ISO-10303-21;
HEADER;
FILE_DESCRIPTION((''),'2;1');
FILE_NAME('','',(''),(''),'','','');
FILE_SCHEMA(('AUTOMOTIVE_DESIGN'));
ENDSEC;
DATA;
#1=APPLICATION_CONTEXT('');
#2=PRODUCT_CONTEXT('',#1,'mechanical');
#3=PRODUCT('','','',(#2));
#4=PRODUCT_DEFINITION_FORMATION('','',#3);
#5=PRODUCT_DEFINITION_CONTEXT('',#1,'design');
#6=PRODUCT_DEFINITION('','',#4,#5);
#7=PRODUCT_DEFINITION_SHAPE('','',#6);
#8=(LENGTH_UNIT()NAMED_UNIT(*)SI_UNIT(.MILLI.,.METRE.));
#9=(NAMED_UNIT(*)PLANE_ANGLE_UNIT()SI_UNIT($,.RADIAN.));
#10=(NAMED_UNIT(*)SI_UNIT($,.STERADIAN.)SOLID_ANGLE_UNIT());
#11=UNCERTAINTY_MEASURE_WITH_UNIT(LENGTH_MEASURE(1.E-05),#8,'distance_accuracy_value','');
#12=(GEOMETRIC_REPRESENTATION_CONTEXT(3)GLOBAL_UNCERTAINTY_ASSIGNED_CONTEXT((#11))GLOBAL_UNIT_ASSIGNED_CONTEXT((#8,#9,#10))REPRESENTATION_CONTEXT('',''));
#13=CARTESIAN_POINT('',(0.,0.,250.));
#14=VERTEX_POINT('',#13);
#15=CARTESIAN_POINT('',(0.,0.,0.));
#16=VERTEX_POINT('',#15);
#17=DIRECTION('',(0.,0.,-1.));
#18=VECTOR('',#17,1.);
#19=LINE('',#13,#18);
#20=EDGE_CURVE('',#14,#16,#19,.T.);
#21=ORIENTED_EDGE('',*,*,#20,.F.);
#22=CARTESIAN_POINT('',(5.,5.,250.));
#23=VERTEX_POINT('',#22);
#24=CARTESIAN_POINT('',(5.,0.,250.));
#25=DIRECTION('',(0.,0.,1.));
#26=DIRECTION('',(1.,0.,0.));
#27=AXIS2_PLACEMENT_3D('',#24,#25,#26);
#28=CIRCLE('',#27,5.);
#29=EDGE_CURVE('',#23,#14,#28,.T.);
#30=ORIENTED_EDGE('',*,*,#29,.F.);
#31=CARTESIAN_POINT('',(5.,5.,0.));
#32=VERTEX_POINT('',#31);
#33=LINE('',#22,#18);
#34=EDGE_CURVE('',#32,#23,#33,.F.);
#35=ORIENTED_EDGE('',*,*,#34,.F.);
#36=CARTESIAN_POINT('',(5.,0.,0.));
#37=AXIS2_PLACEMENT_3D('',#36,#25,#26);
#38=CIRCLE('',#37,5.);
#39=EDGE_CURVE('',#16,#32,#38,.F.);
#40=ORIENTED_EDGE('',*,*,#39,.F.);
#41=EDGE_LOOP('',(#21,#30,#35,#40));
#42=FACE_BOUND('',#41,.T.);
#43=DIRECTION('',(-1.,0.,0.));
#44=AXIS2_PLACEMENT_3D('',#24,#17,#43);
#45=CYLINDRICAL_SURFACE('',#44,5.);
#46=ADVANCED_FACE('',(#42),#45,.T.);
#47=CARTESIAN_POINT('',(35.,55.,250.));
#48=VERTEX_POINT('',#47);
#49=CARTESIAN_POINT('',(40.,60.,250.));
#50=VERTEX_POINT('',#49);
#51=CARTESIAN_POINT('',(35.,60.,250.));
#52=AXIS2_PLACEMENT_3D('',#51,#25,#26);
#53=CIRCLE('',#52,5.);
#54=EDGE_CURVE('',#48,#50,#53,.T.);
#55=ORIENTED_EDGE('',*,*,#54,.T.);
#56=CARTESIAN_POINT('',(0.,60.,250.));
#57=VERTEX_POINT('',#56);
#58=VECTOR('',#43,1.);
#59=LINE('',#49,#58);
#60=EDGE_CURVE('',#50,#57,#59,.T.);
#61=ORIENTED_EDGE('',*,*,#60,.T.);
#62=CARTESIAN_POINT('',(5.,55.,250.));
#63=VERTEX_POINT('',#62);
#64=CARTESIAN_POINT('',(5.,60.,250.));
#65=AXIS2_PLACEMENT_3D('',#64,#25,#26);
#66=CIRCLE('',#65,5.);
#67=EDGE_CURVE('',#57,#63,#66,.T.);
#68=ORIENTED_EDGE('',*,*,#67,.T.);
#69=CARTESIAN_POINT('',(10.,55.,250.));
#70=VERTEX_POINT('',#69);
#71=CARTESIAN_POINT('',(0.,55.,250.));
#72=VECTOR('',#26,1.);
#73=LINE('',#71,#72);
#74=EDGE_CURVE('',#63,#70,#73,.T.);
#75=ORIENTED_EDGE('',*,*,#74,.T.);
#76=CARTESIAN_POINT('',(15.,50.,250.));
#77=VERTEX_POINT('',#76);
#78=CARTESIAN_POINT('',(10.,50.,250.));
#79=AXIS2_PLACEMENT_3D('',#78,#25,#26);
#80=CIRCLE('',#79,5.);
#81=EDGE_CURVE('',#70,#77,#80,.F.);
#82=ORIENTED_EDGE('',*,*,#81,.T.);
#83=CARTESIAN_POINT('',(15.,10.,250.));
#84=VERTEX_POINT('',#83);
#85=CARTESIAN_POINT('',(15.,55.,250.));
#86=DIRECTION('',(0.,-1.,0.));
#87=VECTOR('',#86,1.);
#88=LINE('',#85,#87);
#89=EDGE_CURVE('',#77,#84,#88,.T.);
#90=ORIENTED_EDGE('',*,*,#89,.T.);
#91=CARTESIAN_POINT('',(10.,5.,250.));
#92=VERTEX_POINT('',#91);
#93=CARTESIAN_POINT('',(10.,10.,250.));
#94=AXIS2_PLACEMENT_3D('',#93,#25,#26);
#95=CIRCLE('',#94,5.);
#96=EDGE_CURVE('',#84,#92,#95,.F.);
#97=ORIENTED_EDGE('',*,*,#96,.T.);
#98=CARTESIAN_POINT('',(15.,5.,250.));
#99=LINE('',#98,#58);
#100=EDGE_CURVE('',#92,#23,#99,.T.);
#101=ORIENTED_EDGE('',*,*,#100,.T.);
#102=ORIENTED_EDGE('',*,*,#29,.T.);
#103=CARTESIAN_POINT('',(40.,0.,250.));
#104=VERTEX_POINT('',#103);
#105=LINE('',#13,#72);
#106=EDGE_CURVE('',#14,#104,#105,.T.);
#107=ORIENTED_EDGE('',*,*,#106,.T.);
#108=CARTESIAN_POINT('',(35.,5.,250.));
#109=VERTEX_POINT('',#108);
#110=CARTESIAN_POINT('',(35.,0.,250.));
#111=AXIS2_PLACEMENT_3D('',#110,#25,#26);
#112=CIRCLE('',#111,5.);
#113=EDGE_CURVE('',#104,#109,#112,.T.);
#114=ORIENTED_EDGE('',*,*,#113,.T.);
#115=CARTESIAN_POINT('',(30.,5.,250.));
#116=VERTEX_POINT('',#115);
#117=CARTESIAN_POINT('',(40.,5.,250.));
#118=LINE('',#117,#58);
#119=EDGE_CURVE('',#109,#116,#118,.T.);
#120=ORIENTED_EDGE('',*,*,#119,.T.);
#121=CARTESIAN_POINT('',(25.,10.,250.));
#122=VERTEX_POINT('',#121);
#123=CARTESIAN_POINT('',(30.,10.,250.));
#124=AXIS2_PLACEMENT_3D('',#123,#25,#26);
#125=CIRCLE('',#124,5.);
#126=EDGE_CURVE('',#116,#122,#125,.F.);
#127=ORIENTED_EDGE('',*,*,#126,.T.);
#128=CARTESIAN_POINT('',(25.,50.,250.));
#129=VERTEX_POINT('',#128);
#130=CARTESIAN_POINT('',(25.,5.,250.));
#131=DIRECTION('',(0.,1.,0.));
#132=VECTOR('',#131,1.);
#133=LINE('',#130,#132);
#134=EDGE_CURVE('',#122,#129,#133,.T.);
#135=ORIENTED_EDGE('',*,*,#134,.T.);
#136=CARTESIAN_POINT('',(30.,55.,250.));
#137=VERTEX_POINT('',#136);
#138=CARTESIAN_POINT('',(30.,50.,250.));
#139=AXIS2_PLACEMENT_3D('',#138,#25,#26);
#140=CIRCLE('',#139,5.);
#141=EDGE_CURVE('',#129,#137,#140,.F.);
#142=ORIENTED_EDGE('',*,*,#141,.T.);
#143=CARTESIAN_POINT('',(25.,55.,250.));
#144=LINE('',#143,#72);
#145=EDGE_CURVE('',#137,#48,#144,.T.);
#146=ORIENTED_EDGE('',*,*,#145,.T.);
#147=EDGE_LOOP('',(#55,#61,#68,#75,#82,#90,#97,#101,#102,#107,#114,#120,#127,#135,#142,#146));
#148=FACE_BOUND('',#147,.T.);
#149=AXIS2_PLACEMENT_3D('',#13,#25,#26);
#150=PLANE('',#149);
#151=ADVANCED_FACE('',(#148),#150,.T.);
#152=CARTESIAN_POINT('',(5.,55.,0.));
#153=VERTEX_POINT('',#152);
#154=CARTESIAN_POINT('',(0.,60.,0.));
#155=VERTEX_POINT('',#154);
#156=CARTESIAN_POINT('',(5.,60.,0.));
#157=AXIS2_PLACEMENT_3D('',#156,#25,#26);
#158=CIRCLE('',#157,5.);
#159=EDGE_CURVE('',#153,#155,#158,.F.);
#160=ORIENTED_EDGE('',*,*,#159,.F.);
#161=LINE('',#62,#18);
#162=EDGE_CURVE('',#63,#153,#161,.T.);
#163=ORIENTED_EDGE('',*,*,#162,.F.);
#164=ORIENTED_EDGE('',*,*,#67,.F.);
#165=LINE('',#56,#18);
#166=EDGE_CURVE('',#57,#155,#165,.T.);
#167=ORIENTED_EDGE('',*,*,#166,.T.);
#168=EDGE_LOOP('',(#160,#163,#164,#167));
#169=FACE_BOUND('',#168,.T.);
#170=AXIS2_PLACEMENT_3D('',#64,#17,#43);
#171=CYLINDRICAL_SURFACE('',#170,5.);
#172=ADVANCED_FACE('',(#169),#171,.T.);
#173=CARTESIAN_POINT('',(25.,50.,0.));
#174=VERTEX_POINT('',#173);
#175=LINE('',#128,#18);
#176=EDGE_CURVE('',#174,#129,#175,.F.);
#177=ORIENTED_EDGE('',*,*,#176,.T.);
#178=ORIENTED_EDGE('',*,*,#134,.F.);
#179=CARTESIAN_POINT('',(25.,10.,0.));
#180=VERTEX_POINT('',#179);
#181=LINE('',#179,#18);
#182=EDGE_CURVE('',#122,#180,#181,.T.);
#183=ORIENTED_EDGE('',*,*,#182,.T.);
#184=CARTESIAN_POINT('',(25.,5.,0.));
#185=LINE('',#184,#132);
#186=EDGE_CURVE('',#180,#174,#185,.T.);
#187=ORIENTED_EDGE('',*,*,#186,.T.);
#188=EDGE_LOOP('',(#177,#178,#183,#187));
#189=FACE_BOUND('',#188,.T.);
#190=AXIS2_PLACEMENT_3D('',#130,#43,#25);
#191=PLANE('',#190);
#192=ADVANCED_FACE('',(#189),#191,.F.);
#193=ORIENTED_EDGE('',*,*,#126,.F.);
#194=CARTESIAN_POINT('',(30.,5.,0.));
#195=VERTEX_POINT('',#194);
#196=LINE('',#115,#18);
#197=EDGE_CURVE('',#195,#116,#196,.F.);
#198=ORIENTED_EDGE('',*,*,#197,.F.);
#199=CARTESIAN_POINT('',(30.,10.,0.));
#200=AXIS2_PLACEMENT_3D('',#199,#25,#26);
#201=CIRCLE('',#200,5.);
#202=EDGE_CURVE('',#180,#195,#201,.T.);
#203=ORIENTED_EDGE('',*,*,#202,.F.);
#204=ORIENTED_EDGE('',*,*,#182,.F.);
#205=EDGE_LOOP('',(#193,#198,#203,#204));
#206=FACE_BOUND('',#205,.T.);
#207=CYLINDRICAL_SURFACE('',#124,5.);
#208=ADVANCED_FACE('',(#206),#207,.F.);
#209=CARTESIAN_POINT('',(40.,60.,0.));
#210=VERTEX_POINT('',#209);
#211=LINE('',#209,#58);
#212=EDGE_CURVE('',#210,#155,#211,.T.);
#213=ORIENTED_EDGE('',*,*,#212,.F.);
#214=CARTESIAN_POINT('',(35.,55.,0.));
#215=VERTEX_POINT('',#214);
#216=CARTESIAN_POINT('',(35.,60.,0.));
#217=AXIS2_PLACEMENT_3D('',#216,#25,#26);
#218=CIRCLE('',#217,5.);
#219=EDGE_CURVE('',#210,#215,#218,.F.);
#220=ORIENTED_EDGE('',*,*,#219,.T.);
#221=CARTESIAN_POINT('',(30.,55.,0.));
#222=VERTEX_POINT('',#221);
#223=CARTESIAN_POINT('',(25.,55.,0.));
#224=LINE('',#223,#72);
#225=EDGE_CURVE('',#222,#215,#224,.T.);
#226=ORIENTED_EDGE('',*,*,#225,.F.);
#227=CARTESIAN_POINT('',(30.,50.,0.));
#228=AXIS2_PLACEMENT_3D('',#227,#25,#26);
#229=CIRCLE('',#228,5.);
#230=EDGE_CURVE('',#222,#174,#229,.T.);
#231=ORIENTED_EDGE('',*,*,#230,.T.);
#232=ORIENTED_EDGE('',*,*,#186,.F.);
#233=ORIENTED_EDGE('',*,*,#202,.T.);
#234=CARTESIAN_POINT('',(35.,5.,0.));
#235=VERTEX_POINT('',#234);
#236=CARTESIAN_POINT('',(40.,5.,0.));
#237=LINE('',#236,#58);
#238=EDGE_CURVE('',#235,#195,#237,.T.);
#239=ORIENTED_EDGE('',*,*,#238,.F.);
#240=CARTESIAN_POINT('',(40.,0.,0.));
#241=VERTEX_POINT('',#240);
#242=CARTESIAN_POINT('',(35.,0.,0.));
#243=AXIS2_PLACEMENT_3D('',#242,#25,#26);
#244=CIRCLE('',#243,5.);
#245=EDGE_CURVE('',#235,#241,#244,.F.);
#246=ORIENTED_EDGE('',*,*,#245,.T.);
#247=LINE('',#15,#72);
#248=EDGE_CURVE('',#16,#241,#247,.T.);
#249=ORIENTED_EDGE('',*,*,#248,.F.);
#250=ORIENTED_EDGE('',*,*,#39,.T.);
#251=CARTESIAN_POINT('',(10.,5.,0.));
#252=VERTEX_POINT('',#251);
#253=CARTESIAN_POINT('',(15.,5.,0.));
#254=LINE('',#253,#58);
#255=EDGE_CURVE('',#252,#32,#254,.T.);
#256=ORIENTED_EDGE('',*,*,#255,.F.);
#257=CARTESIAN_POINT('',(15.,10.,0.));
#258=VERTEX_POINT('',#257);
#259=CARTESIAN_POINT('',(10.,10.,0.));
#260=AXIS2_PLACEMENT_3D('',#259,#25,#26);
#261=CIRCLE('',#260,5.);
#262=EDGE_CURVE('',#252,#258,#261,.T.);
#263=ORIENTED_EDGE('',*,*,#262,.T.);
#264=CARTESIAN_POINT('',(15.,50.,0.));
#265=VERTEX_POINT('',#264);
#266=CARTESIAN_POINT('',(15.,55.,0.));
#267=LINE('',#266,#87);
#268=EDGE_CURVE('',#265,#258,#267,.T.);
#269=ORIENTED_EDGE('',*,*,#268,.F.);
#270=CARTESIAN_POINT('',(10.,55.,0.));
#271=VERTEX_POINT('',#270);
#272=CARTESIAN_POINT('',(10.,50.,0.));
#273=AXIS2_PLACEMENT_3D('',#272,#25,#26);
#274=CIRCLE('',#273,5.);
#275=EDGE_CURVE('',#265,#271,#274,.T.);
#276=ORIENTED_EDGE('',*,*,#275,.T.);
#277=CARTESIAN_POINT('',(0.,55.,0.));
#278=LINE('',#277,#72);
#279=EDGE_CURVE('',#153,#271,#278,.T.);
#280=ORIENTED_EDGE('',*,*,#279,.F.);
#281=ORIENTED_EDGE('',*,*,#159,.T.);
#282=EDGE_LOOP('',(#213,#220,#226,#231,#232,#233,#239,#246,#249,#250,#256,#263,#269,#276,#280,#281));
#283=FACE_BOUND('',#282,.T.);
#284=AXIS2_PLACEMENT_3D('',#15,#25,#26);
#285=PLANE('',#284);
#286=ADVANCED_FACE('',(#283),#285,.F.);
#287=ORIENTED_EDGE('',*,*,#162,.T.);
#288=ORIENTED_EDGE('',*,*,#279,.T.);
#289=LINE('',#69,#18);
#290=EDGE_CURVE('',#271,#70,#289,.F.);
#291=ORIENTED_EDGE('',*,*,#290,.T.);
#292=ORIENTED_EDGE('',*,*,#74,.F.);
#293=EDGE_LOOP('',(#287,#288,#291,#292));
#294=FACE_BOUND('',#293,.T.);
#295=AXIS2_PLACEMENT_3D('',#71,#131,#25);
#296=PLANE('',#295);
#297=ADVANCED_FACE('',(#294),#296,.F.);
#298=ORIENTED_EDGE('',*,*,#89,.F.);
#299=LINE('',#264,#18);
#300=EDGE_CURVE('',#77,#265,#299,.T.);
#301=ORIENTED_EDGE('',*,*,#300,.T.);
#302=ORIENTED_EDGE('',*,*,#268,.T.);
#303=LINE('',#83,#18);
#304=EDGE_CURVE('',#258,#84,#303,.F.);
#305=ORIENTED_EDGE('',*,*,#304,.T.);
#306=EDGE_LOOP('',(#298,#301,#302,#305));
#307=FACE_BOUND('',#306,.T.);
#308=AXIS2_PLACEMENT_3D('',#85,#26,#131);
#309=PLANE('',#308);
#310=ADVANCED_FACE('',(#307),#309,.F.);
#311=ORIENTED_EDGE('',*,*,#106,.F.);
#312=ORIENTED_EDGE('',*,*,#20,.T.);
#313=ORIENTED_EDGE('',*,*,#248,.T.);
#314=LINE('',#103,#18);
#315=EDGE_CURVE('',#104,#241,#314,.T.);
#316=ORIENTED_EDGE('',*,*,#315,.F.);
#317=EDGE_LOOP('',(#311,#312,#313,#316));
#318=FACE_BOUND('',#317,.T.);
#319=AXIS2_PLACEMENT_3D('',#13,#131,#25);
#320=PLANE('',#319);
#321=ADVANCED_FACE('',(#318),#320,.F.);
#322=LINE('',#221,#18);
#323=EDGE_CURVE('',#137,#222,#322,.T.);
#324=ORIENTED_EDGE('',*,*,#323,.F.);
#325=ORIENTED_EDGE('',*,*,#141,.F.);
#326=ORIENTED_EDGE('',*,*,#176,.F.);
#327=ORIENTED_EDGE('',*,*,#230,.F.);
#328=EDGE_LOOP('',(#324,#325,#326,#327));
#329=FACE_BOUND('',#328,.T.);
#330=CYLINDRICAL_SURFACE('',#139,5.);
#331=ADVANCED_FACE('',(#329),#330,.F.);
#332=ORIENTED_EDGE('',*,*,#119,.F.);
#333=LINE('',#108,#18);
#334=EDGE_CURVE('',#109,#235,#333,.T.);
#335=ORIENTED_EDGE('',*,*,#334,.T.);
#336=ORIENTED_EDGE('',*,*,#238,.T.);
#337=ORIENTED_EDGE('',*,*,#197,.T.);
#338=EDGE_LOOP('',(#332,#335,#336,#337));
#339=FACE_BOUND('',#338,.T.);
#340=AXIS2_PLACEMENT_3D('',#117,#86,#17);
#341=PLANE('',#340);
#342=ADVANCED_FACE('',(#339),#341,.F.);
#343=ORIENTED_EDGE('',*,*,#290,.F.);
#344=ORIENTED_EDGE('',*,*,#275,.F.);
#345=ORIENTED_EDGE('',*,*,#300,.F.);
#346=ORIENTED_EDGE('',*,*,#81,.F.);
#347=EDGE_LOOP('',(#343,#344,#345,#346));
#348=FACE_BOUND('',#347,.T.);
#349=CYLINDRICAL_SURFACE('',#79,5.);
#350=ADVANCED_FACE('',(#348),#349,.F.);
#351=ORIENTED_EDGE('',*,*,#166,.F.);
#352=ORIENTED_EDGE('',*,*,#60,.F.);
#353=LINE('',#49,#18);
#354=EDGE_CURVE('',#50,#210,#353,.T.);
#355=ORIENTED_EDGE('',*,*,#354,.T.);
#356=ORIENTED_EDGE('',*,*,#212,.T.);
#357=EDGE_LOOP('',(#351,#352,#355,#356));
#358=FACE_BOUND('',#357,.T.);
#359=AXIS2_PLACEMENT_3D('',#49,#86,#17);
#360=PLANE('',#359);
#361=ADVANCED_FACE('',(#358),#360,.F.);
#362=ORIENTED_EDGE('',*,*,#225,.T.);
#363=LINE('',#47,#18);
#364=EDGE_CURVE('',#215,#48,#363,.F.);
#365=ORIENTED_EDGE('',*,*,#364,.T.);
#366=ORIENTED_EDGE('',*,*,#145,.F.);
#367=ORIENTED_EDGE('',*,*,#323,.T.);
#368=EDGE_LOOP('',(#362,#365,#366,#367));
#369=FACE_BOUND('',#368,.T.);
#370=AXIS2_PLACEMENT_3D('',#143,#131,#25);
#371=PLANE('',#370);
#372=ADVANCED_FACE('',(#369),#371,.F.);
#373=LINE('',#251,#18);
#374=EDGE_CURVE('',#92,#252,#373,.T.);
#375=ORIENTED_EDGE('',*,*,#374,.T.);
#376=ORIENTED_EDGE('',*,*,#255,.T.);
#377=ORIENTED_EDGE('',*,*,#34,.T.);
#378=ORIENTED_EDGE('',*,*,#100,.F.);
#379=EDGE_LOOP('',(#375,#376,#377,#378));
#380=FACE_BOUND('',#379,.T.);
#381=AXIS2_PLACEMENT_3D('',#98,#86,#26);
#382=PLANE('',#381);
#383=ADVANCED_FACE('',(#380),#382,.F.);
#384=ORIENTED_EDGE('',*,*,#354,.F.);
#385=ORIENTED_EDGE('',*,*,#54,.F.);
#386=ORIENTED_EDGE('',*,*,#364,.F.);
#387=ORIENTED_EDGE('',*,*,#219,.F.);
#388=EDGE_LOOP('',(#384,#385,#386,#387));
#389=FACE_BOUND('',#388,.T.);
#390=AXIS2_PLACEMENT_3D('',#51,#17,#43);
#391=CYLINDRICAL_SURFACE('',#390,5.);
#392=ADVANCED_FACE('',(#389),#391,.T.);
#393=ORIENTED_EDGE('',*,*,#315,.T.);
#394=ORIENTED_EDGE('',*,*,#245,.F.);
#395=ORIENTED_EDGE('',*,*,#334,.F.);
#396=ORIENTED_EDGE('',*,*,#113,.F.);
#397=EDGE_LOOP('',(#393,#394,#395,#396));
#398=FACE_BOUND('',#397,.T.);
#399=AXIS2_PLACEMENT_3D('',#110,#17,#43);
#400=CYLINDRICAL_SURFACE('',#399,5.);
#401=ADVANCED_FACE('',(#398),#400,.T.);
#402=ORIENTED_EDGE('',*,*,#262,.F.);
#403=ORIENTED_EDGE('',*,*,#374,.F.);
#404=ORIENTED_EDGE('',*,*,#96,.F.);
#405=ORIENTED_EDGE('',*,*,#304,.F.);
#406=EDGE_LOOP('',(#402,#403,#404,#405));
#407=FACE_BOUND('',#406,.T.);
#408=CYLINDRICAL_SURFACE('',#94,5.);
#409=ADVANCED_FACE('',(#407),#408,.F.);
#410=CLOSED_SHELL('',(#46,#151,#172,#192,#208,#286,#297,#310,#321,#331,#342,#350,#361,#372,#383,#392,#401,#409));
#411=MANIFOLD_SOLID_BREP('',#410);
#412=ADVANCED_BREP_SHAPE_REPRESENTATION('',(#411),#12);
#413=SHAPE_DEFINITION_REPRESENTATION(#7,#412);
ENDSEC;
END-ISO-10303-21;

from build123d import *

# Parameters (mm, degrees)
DODANIE_WYCI_GNI_CIE1_DEPTH = 250
ZAOKR_GLENIE2_DEPTH         = 250
ZAOKR_GLENIE2_2_DEPTH       = 250


with BuildPart() as part:
    # Szkic1 → Dodanie-wyciągnięcie1 (new body)
    with BuildSketch(Plane.XY):
        Polygon((0, 0), (40, 0), (40, 5), (25, 5), (25, 55), (40, 55), (40, 60), (0, 60), (0, 55), (15, 55), (15, 5), (0, 5), align=None)
    extrude(amount=DODANIE_WYCI_GNI_CIE1_DEPTH)

    # Zaokrąglenie2: read off the stored shape, not the designer's step
    # Zaokrąglenie2 outline → Zaokrąglenie2 (cut)
    with BuildSketch(Plane.XY):
        with BuildLine():
            Line((40, 55), (40, 60))
            ThreePointArc((40, 60), (38.535533906, 56.464466094), (35, 55))
            Line((35, 55), (40, 55))
        make_face()
        with BuildLine():
            Line((40, 5), (35, 5))
            ThreePointArc((35, 5), (38.535533906, 3.535533906), (40, 0))
            Line((40, 0), (40, 5))
        make_face()
        with BuildLine():
            Line((0, 55), (5, 55))
            ThreePointArc((5, 55), (1.464466094, 56.464466094), (0, 60))
            Line((0, 60), (0, 55))
        make_face()
        with BuildLine():
            ThreePointArc((0, 0), (1.464466094, 3.535533906), (5, 5))
            Line((5, 5), (0, 5))
            Line((0, 5), (0, 0))
        make_face()
    extrude(amount=ZAOKR_GLENIE2_DEPTH, mode=Mode.SUBTRACT)

    # Zaokr_glenie2 2 outline → Zaokr_glenie2 2 (add)
    with BuildSketch(Plane.XY):
        with BuildLine():
            ThreePointArc((30, 5), (26.464466094, 6.464466094), (25, 10))
            Line((25, 10), (25, 5))
            Line((25, 5), (30, 5))
        make_face()
        with BuildLine():
            ThreePointArc((25, 50), (26.464466094, 53.535533906), (30, 55))
            Line((30, 55), (25, 55))
            Line((25, 55), (25, 50))
        make_face()
        with BuildLine():
            ThreePointArc((10, 55), (13.535533906, 53.535533906), (15, 50))
            Line((15, 50), (15, 55))
            Line((15, 55), (10, 55))
        make_face()
        with BuildLine():
            ThreePointArc((15, 10), (13.535533906, 6.464466094), (10, 5))
            Line((10, 5), (15, 5))
            Line((15, 5), (15, 10))
        make_face()
    extrude(amount=ZAOKR_GLENIE2_2_DEPTH)


solid = part.part
